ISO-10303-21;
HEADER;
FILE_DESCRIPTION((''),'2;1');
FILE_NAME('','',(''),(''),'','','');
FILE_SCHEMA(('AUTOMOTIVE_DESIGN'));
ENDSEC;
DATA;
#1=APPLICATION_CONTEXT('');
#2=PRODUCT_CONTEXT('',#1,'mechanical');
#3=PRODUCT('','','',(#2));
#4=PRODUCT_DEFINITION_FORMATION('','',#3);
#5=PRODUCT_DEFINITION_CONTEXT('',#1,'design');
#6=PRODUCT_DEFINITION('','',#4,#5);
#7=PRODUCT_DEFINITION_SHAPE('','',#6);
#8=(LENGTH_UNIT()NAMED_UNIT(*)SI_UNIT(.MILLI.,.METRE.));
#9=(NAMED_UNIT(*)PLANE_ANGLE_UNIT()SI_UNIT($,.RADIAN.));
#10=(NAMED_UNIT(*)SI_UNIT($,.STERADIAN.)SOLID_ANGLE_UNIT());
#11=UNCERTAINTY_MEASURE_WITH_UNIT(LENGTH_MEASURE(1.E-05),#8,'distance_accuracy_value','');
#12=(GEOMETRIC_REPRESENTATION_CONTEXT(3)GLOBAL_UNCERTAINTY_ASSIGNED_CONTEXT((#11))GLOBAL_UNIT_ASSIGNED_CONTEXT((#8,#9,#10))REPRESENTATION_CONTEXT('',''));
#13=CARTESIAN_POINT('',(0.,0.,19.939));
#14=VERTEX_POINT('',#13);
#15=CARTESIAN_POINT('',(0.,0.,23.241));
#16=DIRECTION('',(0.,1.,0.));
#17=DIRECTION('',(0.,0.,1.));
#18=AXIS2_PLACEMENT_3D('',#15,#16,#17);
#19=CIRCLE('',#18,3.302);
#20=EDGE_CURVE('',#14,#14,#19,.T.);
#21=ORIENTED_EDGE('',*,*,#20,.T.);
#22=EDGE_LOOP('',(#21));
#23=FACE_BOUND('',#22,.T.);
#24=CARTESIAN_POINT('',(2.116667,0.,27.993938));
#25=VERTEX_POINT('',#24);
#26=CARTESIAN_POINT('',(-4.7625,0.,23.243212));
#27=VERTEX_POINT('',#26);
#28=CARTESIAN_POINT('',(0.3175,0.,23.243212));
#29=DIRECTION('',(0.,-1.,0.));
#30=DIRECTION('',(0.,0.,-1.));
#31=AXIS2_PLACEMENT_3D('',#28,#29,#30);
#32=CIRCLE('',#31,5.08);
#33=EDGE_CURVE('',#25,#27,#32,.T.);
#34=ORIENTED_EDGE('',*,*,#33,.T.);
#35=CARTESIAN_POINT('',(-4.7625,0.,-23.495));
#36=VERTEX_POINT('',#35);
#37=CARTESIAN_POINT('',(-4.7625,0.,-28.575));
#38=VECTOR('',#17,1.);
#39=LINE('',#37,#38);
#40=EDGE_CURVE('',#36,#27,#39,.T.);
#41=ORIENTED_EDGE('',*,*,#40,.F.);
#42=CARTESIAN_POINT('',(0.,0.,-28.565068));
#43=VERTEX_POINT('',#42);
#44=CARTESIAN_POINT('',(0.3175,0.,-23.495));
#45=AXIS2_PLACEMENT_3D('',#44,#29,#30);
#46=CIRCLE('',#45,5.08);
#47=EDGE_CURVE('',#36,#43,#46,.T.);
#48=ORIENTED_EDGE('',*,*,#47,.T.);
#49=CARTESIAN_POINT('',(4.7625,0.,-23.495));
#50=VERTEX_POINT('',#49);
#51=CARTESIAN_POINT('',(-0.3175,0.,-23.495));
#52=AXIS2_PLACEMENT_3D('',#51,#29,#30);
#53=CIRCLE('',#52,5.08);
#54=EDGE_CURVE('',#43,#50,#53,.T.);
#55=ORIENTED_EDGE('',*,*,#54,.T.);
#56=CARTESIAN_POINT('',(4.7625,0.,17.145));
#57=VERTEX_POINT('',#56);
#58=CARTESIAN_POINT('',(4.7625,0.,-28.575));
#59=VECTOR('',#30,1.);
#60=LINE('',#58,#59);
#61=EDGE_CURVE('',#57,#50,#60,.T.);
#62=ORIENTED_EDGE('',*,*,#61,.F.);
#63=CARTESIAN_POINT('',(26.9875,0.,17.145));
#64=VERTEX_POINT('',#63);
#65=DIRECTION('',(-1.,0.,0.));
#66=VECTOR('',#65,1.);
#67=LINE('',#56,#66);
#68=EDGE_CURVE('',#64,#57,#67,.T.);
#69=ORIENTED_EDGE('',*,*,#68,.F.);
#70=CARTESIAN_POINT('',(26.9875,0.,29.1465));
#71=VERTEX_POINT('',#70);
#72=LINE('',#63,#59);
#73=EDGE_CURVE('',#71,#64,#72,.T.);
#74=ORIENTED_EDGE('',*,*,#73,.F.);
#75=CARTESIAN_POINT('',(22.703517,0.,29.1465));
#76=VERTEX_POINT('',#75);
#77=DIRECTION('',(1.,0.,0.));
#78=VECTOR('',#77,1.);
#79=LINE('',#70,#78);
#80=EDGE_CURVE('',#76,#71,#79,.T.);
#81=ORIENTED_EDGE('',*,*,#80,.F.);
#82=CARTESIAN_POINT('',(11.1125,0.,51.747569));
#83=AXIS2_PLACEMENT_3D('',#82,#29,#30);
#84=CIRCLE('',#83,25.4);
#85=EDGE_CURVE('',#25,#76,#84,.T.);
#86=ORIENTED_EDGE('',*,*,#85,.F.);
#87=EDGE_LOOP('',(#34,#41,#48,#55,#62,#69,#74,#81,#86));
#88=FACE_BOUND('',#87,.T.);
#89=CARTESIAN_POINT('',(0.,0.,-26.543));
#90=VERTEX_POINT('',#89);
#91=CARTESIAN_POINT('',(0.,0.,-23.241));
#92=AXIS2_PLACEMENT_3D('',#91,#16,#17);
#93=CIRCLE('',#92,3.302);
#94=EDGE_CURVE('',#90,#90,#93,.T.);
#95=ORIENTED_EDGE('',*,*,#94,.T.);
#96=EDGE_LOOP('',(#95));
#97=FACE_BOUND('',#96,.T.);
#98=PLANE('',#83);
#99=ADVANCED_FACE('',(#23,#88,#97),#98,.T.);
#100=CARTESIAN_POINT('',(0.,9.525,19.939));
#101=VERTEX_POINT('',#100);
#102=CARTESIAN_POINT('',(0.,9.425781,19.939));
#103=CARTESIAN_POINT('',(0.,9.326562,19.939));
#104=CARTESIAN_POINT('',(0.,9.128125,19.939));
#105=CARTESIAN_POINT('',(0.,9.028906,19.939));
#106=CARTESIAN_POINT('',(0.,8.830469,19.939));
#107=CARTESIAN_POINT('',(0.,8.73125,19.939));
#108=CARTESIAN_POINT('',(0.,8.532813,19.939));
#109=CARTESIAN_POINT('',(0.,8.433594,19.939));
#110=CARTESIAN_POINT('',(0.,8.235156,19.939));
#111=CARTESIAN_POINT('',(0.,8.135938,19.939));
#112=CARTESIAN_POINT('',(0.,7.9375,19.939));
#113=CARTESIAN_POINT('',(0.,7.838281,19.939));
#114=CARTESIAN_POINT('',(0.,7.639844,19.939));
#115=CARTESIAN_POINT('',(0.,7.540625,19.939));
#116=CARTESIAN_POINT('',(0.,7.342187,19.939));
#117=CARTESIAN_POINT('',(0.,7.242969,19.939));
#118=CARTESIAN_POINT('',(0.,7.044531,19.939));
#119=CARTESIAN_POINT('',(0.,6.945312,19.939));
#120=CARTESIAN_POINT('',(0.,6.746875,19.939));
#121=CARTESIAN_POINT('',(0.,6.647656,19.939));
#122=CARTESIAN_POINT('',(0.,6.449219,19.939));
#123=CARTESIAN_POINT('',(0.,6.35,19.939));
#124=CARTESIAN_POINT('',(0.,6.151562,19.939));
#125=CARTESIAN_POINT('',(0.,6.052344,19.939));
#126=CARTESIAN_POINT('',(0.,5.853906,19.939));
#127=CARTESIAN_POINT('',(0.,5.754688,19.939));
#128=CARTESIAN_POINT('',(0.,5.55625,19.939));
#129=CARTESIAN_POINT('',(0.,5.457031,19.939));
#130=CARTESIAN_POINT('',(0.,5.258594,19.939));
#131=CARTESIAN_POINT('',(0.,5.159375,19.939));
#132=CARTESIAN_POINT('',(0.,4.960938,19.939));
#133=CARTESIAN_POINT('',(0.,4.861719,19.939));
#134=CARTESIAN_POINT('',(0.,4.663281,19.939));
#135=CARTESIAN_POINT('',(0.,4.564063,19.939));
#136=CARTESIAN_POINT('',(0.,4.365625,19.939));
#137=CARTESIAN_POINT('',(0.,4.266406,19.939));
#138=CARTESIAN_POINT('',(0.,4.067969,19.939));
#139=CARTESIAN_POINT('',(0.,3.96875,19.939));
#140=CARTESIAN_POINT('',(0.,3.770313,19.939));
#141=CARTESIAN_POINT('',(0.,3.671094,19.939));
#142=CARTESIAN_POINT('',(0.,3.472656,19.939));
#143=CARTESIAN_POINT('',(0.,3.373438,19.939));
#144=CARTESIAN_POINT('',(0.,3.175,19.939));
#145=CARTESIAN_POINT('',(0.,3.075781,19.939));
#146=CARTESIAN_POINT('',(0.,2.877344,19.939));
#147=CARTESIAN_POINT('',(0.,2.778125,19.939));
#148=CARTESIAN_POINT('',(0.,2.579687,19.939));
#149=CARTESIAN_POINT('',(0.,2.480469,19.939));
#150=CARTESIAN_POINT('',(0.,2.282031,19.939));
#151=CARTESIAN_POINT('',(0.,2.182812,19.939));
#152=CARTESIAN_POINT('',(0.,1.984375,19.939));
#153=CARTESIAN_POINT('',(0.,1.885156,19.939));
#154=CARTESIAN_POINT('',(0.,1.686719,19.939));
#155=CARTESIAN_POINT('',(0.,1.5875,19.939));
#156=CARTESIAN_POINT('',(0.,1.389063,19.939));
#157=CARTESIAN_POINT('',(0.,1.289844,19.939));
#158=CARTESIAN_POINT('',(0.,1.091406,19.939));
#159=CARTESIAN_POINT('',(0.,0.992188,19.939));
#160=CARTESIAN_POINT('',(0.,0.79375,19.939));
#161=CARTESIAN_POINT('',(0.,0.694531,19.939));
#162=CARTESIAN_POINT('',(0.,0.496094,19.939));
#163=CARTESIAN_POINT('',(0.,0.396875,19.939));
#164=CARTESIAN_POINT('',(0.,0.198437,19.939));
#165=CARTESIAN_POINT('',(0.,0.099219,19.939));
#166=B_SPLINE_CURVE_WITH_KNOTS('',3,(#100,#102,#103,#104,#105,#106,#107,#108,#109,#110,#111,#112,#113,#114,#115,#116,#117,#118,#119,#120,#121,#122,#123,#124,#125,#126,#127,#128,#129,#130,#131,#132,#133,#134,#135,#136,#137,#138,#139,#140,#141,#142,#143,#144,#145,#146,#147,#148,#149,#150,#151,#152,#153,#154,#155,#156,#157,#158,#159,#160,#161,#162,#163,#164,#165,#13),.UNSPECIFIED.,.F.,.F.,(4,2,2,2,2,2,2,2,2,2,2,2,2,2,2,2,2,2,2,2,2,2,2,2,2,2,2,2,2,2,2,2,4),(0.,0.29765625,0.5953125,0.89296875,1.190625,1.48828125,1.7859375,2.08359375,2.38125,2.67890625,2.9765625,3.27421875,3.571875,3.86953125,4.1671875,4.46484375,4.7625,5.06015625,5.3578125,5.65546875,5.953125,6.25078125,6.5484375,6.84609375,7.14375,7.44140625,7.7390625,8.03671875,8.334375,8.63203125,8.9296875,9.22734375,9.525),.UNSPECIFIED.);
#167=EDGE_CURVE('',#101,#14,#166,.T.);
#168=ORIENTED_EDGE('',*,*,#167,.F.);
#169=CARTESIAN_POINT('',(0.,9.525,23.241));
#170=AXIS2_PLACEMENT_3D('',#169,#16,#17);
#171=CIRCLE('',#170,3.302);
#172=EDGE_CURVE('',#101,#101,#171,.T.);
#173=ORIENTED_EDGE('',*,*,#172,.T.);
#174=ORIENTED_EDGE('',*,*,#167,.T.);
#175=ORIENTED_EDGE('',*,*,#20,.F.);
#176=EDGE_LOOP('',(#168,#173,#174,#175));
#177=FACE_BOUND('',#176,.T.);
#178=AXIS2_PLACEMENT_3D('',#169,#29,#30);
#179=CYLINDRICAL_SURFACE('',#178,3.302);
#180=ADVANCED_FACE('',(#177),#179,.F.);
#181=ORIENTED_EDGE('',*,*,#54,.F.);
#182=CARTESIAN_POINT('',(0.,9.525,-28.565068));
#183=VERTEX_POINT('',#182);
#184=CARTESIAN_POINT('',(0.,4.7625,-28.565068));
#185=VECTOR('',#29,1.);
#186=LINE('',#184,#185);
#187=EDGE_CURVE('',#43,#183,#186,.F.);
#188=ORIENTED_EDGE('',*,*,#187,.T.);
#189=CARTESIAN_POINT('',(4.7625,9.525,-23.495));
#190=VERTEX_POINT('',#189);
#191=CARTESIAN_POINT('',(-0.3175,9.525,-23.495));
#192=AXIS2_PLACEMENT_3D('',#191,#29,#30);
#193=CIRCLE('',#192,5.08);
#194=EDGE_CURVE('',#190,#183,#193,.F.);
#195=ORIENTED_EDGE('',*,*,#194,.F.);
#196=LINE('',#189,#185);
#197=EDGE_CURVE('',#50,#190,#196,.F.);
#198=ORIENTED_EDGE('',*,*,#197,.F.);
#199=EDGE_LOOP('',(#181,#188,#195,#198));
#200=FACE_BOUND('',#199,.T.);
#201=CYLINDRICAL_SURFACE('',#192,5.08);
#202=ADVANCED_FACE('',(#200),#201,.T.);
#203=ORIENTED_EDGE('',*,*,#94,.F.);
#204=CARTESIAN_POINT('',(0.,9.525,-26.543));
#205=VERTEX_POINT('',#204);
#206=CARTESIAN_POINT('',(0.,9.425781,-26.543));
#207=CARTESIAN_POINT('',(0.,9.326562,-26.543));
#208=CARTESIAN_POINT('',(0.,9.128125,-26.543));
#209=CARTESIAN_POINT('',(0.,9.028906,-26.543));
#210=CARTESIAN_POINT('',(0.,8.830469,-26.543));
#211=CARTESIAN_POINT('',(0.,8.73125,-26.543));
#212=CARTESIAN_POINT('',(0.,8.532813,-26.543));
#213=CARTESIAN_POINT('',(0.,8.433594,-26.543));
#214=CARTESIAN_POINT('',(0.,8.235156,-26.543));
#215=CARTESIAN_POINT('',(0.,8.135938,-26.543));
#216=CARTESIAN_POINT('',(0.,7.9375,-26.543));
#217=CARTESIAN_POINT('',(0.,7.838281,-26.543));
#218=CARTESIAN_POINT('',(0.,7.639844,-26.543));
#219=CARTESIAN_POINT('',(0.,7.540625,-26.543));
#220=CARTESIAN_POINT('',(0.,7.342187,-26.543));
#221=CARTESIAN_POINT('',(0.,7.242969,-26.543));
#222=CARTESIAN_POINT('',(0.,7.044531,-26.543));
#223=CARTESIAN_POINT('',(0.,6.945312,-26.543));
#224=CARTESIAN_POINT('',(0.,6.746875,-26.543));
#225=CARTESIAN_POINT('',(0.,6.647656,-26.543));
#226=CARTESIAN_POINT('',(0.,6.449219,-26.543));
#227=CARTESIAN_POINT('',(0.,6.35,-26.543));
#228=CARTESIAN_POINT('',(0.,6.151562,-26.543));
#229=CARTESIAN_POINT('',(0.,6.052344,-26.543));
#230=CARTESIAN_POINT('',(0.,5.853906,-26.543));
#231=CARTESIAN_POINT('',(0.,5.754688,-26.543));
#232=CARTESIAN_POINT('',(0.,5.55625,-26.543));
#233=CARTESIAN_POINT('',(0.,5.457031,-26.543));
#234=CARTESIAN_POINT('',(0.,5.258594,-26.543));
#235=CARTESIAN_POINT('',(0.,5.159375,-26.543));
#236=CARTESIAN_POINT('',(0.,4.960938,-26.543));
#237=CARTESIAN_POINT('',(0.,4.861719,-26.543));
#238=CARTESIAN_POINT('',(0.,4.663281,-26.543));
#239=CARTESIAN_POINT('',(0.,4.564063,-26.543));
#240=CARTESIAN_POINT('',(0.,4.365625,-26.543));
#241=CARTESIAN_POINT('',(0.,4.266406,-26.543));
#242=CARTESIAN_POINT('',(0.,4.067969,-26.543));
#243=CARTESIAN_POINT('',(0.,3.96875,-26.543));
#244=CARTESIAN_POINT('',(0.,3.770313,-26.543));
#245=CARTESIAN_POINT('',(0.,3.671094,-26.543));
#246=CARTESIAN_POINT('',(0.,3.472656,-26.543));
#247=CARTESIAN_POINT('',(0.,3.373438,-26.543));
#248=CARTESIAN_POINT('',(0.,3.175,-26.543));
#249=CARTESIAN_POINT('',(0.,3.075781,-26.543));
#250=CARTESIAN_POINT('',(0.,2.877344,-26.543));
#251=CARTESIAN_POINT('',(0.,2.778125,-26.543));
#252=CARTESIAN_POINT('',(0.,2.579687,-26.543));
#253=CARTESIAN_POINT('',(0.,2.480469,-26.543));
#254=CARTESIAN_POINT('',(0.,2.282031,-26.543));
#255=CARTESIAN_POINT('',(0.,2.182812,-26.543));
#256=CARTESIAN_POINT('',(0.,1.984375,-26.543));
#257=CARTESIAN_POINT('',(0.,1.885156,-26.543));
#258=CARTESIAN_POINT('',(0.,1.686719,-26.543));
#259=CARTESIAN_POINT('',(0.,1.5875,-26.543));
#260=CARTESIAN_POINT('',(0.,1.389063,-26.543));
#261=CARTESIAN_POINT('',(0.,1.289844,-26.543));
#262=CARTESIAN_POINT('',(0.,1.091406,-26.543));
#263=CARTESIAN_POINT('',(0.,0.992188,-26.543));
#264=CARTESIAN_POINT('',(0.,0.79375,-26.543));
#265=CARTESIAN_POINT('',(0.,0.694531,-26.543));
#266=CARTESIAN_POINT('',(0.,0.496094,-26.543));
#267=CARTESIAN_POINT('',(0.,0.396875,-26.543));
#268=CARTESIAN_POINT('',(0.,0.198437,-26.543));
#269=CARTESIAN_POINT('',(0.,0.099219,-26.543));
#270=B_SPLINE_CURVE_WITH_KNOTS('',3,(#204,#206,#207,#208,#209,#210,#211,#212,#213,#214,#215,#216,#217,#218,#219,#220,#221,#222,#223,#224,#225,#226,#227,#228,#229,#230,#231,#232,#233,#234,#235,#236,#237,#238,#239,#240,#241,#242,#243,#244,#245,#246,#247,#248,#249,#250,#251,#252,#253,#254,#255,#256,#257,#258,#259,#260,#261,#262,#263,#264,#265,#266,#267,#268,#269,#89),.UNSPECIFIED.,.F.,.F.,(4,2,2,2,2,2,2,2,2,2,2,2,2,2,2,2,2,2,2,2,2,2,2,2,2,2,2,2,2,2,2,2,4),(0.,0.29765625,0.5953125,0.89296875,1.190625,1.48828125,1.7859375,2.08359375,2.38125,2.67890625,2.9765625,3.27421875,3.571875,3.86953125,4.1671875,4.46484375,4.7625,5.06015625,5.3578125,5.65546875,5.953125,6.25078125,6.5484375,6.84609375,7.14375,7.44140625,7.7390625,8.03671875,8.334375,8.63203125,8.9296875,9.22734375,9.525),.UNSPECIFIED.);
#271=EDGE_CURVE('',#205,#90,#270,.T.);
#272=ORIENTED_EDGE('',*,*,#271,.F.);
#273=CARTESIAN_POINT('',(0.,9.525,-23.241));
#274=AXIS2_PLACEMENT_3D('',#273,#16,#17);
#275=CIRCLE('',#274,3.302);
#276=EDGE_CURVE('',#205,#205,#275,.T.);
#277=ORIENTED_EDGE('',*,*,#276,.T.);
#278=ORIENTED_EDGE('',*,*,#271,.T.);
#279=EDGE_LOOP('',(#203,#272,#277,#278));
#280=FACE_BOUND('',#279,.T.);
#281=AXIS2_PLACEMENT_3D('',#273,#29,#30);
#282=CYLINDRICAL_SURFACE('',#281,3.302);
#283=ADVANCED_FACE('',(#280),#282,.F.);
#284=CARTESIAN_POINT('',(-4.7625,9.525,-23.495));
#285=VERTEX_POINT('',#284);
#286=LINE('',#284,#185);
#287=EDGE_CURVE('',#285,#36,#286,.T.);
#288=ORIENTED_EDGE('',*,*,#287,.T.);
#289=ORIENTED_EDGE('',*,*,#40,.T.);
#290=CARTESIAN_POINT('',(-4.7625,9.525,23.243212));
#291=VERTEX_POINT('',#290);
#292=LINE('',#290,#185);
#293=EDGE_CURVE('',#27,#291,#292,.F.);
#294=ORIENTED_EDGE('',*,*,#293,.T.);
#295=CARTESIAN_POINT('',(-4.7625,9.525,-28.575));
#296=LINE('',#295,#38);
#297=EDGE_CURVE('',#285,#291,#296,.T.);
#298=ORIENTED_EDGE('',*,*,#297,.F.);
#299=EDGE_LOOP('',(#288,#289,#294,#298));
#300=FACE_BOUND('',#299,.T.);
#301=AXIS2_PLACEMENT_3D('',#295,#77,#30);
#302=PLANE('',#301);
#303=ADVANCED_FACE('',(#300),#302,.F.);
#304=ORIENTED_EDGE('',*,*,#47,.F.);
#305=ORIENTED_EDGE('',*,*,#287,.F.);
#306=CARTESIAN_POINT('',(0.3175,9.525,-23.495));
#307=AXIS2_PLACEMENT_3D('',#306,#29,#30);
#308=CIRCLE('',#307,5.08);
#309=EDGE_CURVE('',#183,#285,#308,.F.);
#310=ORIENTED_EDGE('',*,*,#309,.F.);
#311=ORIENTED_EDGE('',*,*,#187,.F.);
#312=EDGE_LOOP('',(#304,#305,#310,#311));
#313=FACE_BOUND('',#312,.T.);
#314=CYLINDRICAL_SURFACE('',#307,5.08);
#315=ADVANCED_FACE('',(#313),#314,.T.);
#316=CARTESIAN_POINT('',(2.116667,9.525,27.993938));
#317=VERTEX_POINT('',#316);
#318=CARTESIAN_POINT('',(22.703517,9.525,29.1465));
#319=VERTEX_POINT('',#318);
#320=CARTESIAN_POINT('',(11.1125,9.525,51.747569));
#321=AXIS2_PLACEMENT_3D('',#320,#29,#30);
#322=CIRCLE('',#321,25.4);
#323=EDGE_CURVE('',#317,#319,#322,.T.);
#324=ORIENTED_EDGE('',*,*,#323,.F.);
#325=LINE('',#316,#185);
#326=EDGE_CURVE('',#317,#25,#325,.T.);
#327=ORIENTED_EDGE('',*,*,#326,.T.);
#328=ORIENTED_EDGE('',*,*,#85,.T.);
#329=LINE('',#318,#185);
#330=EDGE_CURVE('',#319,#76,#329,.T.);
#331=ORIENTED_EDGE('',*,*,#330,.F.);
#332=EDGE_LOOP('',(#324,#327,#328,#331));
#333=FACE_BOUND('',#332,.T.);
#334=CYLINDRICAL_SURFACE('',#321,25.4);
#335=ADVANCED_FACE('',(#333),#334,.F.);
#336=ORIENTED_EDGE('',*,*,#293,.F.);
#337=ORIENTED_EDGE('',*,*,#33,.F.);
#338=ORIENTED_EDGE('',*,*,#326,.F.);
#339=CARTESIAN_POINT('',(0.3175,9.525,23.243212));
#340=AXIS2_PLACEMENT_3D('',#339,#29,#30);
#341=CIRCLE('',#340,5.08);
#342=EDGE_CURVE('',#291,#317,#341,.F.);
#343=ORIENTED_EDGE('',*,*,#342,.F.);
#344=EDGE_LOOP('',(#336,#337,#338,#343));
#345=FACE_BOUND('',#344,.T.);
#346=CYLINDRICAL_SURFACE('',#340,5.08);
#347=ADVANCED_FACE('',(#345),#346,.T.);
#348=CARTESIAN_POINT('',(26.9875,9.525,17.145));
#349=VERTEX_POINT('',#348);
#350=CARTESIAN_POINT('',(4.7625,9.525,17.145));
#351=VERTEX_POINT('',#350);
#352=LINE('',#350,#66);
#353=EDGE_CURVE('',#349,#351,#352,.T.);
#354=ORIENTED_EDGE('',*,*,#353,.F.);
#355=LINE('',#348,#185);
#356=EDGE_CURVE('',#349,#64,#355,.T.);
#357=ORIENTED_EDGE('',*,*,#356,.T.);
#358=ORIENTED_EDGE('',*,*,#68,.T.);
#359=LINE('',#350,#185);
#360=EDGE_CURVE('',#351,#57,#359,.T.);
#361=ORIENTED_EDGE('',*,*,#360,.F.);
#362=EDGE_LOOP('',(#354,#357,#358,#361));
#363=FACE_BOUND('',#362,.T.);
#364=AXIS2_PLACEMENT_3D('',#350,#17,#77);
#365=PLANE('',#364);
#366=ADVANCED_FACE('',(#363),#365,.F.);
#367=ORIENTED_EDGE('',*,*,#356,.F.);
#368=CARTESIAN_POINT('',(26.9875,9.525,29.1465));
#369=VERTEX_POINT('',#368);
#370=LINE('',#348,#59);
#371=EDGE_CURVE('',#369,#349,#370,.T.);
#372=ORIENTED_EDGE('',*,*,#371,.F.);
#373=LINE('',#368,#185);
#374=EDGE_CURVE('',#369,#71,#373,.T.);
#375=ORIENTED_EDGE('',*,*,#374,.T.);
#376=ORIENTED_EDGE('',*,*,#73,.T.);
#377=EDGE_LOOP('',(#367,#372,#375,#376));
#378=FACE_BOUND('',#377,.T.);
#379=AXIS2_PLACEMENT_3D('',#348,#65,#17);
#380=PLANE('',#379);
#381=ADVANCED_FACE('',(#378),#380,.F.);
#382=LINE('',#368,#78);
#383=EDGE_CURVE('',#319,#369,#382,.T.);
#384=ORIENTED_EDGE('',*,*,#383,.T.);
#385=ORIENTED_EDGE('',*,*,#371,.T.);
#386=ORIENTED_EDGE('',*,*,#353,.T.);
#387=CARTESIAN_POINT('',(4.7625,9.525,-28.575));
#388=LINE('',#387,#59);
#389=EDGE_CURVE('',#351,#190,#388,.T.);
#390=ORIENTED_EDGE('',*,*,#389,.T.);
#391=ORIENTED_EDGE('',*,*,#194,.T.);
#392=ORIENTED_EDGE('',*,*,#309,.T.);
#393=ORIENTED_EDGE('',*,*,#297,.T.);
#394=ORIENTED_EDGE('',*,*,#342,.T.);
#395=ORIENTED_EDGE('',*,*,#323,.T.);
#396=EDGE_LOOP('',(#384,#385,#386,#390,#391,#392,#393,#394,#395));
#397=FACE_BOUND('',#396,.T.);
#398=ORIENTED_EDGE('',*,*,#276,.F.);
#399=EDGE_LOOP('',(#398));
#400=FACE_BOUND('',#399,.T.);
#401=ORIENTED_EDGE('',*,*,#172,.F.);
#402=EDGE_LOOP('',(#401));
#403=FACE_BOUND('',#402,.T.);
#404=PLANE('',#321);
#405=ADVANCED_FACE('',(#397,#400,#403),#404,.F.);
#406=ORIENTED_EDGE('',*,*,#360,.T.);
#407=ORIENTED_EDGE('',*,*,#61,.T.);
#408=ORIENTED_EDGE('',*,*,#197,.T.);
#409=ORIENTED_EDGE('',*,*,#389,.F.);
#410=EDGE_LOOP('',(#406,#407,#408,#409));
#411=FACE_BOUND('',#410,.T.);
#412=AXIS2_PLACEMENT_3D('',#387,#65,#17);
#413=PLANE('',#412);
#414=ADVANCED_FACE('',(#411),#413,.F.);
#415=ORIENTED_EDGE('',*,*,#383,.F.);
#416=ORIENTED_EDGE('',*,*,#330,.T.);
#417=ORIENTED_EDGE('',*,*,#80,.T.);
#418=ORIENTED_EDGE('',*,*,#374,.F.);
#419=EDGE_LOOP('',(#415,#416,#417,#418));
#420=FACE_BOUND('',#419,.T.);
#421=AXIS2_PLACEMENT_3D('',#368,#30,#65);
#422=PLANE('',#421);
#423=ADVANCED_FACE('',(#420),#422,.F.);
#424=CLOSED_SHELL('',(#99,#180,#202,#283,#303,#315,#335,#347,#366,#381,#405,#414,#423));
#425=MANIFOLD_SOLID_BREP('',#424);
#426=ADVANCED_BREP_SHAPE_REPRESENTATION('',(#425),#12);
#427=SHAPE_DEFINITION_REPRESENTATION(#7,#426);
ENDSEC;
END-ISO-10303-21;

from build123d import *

# Parameters (mm, degrees)
SKETCH1_R           = 3.302
BOSS_EXTRUDE1_DEPTH = 9.525
FILLET1_R           = 5.08
FILLET2_R           = 5.08
FILLET3_DEPTH       = 9.525


with BuildPart() as part:
    # Sketch1 → Boss-Extrude1 (new body)
    with BuildSketch(Plane(origin=(0, 0, 0), x_dir=(1, 0, 0), z_dir=(0, 1, 0))):
        with BuildLine():
            Line((-4.7625, 28.575), (4.7625, 28.575))
            Line((4.7625, 28.575), (4.7625, -17.145))
            Line((4.7625, -17.145), (26.9875, -17.145))
            Line((26.9875, -17.145), (26.9875, -29.1465))
            Line((26.9875, -29.1465), (22.703516651, -29.1465))
            ThreePointArc((22.703516651, -29.1465), (11.1125, -26.347569289), (-0.478516651, -29.1465))
            Line((-0.478516651, -29.1465), (-4.7625, -29.1465))
            Line((-4.7625, -29.1465), (-4.7625, 28.575))
        make_face()
        with Locations(Location((0, -23.241, 0), (0, 0, 90))):
            Circle(SKETCH1_R, mode=Mode.SUBTRACT)
        with Locations(Location((0, 23.241, 0), (0, 0, 90))):
            Circle(SKETCH1_R, mode=Mode.SUBTRACT)
    extrude(amount=BOSS_EXTRUDE1_DEPTH)

    # Fillet1
    # the kernel refuses this fillet: 5.08 mm, written as the material it takes off along each edge
    with BuildSketch(Plane(origin=(-4.7625, -12.7, -28.575), x_dir=(0, 0, 1), z_dir=(0, 1, 0)), Plane(origin=(4.7625, -12.7, -28.575), x_dir=(-1, 0, 0), z_dir=(0, 1, 0))) as fillet1_piece_1:
        with BuildLine():
            CenterArc((FILLET1_R, FILLET1_R), FILLET1_R, 180, 90)
            Line((0, FILLET1_R), (0, 0))
            Line((0, 0), (FILLET1_R, 0))
        make_face()
    extrude(amount=34.925, mode=Mode.SUBTRACT)

    # Fillet2
    # the kernel refuses this fillet: 5.08 mm, written as the material it takes off along each edge
    with BuildSketch(Plane(origin=(-4.7625, -12.543115017, 29.1465), x_dir=(1, 0, 0), z_dir=(0, 1, 0))) as fillet2_piece_1:
        with BuildLine():
            CenterArc((5.08, 5.017246007), FILLET2_R, 180, 80.98481696)
            Line((0, 5.017246007), (-0.1016, 5.017246007))
            Line((-0.1016, 5.017246007), (-0.1016, 0))
            Line((-0.1016, 0), (0, -0.1016))
            ThreePointArc((0, -0.1016), (2.141991675, -0.1016), (4.268063016, -0.10034492))
            Line((4.268063016, -0.10034492), (4.283983349, 0))
        make_face()
    extrude(amount=34.611230034, mode=Mode.SUBTRACT)

    # Fillet3: read off the stored shape, not the designer's step
    # Fillet3 outline → Fillet3 (cut)
    with BuildSketch(Plane(origin=(0, 0, 0), x_dir=(1, 0, 0), z_dir=(0, 1, 0))):
        with BuildLine():
            ThreePointArc((-0.478516651, -29.1465), (0.802955992, -28.533924544), (2.116666667, -27.993938353))
            ThreePointArc((2.116666667, -27.993938353), (-2.569248459, -27.423293904), (-4.7625, -23.243212166))
            Line((-4.7625, -23.243212166), (-4.7625, -24.129253993))
            ThreePointArc((-4.7625, -24.129253993), (-3.545799405, -27.427938232), (-0.478516651, -29.1465))
        make_face()
    extrude(amount=FILLET3_DEPTH, mode=Mode.SUBTRACT)


solid = part.part
